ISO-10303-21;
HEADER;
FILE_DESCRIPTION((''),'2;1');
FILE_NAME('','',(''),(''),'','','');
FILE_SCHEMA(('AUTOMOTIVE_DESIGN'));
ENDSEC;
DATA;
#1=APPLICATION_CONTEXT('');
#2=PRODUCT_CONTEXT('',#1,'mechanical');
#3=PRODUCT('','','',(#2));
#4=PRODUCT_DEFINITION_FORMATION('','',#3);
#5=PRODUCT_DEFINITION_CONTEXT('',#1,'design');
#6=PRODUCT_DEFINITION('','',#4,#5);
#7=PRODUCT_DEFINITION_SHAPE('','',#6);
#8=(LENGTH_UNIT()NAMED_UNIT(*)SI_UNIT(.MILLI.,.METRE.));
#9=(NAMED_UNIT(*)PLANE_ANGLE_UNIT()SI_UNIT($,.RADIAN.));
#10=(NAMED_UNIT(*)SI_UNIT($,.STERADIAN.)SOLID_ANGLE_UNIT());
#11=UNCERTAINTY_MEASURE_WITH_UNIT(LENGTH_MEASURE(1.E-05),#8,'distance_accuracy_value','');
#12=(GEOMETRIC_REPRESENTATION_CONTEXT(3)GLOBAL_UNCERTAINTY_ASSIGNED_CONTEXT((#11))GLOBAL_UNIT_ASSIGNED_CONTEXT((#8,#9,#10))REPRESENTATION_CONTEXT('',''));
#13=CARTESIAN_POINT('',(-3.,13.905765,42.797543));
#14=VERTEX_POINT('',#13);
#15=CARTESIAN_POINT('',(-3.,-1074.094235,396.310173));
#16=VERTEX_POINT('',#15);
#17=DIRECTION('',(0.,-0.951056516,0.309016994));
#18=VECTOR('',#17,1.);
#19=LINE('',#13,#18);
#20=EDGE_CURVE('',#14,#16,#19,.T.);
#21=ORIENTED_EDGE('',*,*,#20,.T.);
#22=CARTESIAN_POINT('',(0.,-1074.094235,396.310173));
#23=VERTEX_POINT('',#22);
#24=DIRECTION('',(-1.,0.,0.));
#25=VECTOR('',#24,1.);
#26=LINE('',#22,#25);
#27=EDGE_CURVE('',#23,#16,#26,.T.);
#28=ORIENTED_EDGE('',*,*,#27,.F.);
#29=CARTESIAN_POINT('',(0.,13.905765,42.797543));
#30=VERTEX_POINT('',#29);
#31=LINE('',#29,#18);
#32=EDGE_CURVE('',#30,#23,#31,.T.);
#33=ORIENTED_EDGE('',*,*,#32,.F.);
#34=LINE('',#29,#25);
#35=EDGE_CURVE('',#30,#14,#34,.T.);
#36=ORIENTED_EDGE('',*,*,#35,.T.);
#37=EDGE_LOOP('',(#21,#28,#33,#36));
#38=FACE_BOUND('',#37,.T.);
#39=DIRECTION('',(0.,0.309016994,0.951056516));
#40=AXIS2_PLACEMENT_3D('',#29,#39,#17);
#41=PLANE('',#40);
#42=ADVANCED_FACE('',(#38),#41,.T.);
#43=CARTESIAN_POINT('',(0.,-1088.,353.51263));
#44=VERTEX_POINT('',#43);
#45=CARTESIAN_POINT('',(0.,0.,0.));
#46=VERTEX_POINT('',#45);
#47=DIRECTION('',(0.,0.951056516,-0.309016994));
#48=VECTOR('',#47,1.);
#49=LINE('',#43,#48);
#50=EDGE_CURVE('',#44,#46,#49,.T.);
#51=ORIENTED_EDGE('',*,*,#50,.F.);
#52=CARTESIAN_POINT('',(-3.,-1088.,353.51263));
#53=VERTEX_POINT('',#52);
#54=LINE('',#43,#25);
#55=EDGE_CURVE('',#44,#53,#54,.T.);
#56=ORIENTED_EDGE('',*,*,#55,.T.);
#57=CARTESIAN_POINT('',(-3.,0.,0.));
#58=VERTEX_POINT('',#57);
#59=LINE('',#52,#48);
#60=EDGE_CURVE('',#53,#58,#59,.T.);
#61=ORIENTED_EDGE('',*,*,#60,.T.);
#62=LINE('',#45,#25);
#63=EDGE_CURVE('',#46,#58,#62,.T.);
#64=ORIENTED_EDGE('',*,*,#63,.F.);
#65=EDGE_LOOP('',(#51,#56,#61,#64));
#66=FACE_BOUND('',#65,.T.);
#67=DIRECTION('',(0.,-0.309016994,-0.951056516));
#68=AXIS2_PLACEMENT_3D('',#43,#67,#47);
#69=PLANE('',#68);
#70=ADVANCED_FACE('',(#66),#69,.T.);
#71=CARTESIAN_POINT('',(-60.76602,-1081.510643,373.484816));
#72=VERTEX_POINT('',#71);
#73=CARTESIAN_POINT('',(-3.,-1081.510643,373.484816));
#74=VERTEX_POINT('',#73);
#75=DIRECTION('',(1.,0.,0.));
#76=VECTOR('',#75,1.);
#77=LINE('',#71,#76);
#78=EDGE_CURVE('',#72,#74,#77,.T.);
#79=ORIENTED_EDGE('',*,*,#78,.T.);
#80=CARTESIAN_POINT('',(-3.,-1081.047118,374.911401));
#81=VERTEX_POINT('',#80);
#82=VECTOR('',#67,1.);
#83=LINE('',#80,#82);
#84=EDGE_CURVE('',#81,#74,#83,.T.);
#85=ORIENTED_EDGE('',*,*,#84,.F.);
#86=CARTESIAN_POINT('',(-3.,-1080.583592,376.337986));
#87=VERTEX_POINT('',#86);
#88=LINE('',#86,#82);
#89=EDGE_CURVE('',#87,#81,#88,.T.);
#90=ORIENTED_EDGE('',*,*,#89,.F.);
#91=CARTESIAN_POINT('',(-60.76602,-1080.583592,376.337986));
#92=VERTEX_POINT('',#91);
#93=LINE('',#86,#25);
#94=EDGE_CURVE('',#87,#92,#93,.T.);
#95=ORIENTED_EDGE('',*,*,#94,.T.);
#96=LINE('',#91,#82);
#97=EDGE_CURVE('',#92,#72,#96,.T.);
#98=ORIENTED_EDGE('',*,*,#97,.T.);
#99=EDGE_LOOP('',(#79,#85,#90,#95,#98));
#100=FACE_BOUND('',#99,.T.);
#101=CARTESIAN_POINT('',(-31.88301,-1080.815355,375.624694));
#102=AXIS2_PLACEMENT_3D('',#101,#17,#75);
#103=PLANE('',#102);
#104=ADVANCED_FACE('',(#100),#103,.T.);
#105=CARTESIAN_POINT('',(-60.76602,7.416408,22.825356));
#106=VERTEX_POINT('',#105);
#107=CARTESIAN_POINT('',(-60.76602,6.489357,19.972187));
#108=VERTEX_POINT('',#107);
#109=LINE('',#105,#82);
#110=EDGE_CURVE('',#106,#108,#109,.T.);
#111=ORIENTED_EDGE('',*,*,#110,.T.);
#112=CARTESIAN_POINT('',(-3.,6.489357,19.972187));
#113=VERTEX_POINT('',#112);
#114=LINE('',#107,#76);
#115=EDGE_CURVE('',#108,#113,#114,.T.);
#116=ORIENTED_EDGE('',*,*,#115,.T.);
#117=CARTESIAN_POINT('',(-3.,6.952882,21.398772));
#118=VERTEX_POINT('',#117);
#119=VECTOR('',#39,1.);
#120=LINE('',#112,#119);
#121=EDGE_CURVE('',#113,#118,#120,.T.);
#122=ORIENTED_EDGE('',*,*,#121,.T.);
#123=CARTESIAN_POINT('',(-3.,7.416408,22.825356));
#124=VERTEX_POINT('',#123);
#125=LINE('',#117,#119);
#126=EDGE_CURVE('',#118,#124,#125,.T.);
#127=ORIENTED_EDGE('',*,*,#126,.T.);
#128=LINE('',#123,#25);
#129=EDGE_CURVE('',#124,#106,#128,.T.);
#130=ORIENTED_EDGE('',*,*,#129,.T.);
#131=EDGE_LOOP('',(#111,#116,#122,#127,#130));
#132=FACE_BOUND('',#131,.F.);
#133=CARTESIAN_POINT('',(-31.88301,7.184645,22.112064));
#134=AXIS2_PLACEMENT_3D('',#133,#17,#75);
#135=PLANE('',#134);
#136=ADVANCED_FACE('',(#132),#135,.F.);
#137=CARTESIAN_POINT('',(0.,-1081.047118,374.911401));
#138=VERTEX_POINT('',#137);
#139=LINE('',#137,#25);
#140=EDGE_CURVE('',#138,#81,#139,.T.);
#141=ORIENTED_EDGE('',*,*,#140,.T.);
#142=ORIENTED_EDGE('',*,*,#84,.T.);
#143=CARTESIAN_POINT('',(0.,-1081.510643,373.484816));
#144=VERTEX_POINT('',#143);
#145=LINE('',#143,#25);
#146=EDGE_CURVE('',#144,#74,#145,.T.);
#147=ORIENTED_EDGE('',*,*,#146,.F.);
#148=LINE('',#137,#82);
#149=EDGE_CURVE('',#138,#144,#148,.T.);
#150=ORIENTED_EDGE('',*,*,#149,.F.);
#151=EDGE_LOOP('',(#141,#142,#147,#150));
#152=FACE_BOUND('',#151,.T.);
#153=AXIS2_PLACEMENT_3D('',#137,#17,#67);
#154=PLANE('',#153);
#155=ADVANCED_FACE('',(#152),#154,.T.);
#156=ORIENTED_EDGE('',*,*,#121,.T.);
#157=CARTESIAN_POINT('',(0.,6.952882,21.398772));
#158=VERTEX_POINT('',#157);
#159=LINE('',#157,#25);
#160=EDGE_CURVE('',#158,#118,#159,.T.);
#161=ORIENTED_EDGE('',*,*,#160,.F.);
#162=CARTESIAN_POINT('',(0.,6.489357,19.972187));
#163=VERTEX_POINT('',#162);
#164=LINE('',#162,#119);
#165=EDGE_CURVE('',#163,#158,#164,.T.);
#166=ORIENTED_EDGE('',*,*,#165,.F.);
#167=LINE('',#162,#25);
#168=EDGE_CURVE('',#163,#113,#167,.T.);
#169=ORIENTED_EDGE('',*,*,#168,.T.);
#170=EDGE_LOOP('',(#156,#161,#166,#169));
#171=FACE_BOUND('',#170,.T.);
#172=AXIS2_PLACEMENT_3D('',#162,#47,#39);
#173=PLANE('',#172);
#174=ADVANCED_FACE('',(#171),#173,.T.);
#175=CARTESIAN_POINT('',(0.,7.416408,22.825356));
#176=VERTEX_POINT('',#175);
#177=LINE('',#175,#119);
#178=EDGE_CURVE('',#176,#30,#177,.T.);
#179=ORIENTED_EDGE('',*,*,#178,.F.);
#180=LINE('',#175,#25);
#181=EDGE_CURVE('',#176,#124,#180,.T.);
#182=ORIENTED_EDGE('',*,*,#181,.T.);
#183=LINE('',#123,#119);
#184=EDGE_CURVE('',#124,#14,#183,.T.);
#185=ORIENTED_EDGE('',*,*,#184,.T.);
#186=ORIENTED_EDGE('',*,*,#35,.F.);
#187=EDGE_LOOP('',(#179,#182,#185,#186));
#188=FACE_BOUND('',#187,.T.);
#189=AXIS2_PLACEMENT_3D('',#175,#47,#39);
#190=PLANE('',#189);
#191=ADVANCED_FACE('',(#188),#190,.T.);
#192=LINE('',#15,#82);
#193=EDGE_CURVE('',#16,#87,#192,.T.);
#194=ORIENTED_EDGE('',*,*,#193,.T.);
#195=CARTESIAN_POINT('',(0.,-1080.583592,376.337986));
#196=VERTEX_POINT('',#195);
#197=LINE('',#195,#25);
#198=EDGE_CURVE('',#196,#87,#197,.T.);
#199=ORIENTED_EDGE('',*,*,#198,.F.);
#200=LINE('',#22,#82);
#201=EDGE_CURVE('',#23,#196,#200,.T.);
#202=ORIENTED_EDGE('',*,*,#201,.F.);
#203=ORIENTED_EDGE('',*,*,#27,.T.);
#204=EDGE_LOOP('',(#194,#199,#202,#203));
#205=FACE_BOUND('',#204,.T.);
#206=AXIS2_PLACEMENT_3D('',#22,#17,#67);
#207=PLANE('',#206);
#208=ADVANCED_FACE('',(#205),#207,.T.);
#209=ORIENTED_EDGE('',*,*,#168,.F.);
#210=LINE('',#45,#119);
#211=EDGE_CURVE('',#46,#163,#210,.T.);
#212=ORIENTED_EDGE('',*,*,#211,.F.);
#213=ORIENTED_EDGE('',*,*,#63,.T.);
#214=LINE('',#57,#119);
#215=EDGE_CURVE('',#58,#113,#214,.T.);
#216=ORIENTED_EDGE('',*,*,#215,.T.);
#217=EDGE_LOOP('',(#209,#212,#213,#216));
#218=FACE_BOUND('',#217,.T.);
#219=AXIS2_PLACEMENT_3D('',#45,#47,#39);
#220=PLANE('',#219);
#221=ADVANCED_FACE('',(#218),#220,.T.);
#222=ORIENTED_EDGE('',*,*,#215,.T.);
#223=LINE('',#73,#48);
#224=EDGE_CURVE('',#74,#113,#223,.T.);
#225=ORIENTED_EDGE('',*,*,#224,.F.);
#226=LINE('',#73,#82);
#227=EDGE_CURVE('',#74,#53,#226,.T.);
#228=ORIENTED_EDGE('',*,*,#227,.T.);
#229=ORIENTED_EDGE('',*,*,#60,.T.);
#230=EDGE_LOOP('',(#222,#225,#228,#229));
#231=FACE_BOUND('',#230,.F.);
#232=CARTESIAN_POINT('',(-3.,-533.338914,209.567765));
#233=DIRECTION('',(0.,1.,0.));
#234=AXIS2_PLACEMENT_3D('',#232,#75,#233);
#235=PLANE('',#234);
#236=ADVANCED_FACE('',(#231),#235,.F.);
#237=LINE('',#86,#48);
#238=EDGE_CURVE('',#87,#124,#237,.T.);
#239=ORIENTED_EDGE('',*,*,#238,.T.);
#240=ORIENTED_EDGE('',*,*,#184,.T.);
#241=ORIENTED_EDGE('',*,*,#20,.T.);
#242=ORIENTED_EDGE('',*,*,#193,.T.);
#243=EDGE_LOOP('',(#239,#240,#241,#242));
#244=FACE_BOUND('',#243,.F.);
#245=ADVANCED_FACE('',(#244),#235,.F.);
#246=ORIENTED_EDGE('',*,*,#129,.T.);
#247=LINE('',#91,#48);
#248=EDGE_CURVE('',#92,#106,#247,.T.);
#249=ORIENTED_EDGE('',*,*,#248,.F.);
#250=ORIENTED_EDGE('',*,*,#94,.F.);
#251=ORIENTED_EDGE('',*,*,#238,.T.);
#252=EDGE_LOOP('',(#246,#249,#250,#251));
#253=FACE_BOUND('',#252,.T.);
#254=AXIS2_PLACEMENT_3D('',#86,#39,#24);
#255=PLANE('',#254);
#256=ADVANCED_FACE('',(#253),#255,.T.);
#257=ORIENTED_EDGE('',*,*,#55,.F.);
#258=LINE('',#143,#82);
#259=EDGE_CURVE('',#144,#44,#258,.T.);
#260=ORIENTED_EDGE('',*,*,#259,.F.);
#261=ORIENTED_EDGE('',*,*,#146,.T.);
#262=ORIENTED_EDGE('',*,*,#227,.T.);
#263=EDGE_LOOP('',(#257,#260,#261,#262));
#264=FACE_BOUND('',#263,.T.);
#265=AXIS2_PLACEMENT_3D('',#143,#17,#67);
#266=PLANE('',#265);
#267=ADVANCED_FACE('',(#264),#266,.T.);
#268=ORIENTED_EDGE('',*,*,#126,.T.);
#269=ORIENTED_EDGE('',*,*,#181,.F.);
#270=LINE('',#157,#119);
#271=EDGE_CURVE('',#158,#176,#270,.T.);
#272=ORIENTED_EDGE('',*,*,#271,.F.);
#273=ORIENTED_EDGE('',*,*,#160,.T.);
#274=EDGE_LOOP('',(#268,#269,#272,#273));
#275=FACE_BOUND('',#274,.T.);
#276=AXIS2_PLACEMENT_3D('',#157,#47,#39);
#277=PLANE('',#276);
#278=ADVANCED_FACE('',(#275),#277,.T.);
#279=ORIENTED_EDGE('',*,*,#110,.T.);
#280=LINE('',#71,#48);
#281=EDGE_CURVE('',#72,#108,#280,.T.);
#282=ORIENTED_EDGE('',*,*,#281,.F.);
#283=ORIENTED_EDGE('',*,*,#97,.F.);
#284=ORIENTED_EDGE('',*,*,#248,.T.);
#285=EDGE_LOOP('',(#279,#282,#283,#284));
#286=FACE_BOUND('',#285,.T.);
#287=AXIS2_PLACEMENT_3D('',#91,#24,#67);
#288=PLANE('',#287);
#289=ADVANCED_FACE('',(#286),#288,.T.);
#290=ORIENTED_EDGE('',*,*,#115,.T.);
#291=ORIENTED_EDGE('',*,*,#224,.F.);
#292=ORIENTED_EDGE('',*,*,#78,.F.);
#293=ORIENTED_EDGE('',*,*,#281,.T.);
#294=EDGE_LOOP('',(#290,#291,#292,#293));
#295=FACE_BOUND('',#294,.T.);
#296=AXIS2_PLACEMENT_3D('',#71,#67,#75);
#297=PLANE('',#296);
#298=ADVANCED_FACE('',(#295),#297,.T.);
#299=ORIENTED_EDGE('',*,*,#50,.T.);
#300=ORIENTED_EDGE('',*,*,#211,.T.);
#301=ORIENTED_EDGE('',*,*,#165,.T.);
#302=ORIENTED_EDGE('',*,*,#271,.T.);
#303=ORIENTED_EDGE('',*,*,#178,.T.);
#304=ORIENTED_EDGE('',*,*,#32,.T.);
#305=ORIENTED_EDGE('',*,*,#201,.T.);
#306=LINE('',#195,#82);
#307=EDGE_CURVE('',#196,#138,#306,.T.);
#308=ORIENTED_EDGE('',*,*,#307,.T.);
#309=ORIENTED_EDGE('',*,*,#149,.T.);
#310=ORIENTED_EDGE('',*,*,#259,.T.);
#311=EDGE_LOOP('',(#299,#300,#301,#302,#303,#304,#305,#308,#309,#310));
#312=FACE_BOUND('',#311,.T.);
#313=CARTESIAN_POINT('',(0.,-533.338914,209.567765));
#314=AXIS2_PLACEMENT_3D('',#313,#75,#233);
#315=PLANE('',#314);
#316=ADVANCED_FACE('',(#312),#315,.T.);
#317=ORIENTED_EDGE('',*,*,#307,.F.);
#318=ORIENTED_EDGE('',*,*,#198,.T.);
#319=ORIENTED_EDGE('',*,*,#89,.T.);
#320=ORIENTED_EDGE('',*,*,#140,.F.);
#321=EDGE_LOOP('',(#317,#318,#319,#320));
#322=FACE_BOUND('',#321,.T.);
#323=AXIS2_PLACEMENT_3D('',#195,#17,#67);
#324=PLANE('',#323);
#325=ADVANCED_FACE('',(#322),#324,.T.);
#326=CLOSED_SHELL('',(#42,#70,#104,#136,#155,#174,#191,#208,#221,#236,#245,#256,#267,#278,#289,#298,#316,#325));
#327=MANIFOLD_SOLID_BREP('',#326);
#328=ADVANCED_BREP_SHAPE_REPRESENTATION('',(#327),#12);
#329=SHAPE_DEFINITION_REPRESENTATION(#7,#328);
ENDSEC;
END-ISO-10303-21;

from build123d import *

# Parameters (mm, degrees)
F1_DEPTH = 3
F3_DEPTH = 1143.9908999712


# Not quite as in the source:
# - ends of sketch curves that miss each other by under 0.0002 mm in the source are joined
# - a feature names something its author has since deleted; it is built from what else it names


with BuildPart() as f1:
    # F0 (on Right) → F1 (new body)
    with BuildSketch(Plane.YZ):
        Polygon((-1080.583592135, 376.3379858925), (7.416407865, 22.8253563911), (13.9057647469, 42.7975432333), (-1074.0942352531, 396.3101727347), align=None)
        Polygon((-1088, 353.5126295014), (0, 0), (6.4893568819, 19.9721868422), (-1081.5106431181, 373.4848163436), align=None)
        Polygon((-1081.5106431181, 373.4848163436), (6.4893568819, 19.9721868422), (6.9528823734, 21.3987716166), (-1081.0471176266, 374.911401118), align=None)
        Polygon((-1081.0471176266, 374.911401118), (6.9528823734, 21.3987716166), (7.416407865, 22.8253563911), (-1080.583592135, 376.3379858925), align=None)
    extrude(amount=-F1_DEPTH)

    # F2 (on face) → F3 (join, through all)
    with BuildSketch(Plane(origin=(0, -1088, 353.5126295014), x_dir=(1, 0, 0), z_dir=(0, -0.9510565163, 0.3090169944))):
        Polygon((-60.7660203681, 22.5), (-57.3180156743, 22.5), (-3, 22.5), (-3, 24), (-60.7660203681, 24), align=None)
        Polygon((-3, 21), (-3, 22.5), (-3.1967548982, 21), align=None)
        Polygon((-3.1967548982, 21), (-3, 22.5), (-6.2963244545, 21), align=None)
        Polygon((-3, 22.5), (-57.3180188703, 22.5), (-57.5147689745, 21), (-6.2963244545, 21), align=None)
        Polygon((-57.5147689745, 21), (-57.3180140763, 22.5), (-60.7660203681, 22.5), (-60.7660203681, 21), align=None)
    extrude(amount=-F3_DEPTH)


solid = f1.part
